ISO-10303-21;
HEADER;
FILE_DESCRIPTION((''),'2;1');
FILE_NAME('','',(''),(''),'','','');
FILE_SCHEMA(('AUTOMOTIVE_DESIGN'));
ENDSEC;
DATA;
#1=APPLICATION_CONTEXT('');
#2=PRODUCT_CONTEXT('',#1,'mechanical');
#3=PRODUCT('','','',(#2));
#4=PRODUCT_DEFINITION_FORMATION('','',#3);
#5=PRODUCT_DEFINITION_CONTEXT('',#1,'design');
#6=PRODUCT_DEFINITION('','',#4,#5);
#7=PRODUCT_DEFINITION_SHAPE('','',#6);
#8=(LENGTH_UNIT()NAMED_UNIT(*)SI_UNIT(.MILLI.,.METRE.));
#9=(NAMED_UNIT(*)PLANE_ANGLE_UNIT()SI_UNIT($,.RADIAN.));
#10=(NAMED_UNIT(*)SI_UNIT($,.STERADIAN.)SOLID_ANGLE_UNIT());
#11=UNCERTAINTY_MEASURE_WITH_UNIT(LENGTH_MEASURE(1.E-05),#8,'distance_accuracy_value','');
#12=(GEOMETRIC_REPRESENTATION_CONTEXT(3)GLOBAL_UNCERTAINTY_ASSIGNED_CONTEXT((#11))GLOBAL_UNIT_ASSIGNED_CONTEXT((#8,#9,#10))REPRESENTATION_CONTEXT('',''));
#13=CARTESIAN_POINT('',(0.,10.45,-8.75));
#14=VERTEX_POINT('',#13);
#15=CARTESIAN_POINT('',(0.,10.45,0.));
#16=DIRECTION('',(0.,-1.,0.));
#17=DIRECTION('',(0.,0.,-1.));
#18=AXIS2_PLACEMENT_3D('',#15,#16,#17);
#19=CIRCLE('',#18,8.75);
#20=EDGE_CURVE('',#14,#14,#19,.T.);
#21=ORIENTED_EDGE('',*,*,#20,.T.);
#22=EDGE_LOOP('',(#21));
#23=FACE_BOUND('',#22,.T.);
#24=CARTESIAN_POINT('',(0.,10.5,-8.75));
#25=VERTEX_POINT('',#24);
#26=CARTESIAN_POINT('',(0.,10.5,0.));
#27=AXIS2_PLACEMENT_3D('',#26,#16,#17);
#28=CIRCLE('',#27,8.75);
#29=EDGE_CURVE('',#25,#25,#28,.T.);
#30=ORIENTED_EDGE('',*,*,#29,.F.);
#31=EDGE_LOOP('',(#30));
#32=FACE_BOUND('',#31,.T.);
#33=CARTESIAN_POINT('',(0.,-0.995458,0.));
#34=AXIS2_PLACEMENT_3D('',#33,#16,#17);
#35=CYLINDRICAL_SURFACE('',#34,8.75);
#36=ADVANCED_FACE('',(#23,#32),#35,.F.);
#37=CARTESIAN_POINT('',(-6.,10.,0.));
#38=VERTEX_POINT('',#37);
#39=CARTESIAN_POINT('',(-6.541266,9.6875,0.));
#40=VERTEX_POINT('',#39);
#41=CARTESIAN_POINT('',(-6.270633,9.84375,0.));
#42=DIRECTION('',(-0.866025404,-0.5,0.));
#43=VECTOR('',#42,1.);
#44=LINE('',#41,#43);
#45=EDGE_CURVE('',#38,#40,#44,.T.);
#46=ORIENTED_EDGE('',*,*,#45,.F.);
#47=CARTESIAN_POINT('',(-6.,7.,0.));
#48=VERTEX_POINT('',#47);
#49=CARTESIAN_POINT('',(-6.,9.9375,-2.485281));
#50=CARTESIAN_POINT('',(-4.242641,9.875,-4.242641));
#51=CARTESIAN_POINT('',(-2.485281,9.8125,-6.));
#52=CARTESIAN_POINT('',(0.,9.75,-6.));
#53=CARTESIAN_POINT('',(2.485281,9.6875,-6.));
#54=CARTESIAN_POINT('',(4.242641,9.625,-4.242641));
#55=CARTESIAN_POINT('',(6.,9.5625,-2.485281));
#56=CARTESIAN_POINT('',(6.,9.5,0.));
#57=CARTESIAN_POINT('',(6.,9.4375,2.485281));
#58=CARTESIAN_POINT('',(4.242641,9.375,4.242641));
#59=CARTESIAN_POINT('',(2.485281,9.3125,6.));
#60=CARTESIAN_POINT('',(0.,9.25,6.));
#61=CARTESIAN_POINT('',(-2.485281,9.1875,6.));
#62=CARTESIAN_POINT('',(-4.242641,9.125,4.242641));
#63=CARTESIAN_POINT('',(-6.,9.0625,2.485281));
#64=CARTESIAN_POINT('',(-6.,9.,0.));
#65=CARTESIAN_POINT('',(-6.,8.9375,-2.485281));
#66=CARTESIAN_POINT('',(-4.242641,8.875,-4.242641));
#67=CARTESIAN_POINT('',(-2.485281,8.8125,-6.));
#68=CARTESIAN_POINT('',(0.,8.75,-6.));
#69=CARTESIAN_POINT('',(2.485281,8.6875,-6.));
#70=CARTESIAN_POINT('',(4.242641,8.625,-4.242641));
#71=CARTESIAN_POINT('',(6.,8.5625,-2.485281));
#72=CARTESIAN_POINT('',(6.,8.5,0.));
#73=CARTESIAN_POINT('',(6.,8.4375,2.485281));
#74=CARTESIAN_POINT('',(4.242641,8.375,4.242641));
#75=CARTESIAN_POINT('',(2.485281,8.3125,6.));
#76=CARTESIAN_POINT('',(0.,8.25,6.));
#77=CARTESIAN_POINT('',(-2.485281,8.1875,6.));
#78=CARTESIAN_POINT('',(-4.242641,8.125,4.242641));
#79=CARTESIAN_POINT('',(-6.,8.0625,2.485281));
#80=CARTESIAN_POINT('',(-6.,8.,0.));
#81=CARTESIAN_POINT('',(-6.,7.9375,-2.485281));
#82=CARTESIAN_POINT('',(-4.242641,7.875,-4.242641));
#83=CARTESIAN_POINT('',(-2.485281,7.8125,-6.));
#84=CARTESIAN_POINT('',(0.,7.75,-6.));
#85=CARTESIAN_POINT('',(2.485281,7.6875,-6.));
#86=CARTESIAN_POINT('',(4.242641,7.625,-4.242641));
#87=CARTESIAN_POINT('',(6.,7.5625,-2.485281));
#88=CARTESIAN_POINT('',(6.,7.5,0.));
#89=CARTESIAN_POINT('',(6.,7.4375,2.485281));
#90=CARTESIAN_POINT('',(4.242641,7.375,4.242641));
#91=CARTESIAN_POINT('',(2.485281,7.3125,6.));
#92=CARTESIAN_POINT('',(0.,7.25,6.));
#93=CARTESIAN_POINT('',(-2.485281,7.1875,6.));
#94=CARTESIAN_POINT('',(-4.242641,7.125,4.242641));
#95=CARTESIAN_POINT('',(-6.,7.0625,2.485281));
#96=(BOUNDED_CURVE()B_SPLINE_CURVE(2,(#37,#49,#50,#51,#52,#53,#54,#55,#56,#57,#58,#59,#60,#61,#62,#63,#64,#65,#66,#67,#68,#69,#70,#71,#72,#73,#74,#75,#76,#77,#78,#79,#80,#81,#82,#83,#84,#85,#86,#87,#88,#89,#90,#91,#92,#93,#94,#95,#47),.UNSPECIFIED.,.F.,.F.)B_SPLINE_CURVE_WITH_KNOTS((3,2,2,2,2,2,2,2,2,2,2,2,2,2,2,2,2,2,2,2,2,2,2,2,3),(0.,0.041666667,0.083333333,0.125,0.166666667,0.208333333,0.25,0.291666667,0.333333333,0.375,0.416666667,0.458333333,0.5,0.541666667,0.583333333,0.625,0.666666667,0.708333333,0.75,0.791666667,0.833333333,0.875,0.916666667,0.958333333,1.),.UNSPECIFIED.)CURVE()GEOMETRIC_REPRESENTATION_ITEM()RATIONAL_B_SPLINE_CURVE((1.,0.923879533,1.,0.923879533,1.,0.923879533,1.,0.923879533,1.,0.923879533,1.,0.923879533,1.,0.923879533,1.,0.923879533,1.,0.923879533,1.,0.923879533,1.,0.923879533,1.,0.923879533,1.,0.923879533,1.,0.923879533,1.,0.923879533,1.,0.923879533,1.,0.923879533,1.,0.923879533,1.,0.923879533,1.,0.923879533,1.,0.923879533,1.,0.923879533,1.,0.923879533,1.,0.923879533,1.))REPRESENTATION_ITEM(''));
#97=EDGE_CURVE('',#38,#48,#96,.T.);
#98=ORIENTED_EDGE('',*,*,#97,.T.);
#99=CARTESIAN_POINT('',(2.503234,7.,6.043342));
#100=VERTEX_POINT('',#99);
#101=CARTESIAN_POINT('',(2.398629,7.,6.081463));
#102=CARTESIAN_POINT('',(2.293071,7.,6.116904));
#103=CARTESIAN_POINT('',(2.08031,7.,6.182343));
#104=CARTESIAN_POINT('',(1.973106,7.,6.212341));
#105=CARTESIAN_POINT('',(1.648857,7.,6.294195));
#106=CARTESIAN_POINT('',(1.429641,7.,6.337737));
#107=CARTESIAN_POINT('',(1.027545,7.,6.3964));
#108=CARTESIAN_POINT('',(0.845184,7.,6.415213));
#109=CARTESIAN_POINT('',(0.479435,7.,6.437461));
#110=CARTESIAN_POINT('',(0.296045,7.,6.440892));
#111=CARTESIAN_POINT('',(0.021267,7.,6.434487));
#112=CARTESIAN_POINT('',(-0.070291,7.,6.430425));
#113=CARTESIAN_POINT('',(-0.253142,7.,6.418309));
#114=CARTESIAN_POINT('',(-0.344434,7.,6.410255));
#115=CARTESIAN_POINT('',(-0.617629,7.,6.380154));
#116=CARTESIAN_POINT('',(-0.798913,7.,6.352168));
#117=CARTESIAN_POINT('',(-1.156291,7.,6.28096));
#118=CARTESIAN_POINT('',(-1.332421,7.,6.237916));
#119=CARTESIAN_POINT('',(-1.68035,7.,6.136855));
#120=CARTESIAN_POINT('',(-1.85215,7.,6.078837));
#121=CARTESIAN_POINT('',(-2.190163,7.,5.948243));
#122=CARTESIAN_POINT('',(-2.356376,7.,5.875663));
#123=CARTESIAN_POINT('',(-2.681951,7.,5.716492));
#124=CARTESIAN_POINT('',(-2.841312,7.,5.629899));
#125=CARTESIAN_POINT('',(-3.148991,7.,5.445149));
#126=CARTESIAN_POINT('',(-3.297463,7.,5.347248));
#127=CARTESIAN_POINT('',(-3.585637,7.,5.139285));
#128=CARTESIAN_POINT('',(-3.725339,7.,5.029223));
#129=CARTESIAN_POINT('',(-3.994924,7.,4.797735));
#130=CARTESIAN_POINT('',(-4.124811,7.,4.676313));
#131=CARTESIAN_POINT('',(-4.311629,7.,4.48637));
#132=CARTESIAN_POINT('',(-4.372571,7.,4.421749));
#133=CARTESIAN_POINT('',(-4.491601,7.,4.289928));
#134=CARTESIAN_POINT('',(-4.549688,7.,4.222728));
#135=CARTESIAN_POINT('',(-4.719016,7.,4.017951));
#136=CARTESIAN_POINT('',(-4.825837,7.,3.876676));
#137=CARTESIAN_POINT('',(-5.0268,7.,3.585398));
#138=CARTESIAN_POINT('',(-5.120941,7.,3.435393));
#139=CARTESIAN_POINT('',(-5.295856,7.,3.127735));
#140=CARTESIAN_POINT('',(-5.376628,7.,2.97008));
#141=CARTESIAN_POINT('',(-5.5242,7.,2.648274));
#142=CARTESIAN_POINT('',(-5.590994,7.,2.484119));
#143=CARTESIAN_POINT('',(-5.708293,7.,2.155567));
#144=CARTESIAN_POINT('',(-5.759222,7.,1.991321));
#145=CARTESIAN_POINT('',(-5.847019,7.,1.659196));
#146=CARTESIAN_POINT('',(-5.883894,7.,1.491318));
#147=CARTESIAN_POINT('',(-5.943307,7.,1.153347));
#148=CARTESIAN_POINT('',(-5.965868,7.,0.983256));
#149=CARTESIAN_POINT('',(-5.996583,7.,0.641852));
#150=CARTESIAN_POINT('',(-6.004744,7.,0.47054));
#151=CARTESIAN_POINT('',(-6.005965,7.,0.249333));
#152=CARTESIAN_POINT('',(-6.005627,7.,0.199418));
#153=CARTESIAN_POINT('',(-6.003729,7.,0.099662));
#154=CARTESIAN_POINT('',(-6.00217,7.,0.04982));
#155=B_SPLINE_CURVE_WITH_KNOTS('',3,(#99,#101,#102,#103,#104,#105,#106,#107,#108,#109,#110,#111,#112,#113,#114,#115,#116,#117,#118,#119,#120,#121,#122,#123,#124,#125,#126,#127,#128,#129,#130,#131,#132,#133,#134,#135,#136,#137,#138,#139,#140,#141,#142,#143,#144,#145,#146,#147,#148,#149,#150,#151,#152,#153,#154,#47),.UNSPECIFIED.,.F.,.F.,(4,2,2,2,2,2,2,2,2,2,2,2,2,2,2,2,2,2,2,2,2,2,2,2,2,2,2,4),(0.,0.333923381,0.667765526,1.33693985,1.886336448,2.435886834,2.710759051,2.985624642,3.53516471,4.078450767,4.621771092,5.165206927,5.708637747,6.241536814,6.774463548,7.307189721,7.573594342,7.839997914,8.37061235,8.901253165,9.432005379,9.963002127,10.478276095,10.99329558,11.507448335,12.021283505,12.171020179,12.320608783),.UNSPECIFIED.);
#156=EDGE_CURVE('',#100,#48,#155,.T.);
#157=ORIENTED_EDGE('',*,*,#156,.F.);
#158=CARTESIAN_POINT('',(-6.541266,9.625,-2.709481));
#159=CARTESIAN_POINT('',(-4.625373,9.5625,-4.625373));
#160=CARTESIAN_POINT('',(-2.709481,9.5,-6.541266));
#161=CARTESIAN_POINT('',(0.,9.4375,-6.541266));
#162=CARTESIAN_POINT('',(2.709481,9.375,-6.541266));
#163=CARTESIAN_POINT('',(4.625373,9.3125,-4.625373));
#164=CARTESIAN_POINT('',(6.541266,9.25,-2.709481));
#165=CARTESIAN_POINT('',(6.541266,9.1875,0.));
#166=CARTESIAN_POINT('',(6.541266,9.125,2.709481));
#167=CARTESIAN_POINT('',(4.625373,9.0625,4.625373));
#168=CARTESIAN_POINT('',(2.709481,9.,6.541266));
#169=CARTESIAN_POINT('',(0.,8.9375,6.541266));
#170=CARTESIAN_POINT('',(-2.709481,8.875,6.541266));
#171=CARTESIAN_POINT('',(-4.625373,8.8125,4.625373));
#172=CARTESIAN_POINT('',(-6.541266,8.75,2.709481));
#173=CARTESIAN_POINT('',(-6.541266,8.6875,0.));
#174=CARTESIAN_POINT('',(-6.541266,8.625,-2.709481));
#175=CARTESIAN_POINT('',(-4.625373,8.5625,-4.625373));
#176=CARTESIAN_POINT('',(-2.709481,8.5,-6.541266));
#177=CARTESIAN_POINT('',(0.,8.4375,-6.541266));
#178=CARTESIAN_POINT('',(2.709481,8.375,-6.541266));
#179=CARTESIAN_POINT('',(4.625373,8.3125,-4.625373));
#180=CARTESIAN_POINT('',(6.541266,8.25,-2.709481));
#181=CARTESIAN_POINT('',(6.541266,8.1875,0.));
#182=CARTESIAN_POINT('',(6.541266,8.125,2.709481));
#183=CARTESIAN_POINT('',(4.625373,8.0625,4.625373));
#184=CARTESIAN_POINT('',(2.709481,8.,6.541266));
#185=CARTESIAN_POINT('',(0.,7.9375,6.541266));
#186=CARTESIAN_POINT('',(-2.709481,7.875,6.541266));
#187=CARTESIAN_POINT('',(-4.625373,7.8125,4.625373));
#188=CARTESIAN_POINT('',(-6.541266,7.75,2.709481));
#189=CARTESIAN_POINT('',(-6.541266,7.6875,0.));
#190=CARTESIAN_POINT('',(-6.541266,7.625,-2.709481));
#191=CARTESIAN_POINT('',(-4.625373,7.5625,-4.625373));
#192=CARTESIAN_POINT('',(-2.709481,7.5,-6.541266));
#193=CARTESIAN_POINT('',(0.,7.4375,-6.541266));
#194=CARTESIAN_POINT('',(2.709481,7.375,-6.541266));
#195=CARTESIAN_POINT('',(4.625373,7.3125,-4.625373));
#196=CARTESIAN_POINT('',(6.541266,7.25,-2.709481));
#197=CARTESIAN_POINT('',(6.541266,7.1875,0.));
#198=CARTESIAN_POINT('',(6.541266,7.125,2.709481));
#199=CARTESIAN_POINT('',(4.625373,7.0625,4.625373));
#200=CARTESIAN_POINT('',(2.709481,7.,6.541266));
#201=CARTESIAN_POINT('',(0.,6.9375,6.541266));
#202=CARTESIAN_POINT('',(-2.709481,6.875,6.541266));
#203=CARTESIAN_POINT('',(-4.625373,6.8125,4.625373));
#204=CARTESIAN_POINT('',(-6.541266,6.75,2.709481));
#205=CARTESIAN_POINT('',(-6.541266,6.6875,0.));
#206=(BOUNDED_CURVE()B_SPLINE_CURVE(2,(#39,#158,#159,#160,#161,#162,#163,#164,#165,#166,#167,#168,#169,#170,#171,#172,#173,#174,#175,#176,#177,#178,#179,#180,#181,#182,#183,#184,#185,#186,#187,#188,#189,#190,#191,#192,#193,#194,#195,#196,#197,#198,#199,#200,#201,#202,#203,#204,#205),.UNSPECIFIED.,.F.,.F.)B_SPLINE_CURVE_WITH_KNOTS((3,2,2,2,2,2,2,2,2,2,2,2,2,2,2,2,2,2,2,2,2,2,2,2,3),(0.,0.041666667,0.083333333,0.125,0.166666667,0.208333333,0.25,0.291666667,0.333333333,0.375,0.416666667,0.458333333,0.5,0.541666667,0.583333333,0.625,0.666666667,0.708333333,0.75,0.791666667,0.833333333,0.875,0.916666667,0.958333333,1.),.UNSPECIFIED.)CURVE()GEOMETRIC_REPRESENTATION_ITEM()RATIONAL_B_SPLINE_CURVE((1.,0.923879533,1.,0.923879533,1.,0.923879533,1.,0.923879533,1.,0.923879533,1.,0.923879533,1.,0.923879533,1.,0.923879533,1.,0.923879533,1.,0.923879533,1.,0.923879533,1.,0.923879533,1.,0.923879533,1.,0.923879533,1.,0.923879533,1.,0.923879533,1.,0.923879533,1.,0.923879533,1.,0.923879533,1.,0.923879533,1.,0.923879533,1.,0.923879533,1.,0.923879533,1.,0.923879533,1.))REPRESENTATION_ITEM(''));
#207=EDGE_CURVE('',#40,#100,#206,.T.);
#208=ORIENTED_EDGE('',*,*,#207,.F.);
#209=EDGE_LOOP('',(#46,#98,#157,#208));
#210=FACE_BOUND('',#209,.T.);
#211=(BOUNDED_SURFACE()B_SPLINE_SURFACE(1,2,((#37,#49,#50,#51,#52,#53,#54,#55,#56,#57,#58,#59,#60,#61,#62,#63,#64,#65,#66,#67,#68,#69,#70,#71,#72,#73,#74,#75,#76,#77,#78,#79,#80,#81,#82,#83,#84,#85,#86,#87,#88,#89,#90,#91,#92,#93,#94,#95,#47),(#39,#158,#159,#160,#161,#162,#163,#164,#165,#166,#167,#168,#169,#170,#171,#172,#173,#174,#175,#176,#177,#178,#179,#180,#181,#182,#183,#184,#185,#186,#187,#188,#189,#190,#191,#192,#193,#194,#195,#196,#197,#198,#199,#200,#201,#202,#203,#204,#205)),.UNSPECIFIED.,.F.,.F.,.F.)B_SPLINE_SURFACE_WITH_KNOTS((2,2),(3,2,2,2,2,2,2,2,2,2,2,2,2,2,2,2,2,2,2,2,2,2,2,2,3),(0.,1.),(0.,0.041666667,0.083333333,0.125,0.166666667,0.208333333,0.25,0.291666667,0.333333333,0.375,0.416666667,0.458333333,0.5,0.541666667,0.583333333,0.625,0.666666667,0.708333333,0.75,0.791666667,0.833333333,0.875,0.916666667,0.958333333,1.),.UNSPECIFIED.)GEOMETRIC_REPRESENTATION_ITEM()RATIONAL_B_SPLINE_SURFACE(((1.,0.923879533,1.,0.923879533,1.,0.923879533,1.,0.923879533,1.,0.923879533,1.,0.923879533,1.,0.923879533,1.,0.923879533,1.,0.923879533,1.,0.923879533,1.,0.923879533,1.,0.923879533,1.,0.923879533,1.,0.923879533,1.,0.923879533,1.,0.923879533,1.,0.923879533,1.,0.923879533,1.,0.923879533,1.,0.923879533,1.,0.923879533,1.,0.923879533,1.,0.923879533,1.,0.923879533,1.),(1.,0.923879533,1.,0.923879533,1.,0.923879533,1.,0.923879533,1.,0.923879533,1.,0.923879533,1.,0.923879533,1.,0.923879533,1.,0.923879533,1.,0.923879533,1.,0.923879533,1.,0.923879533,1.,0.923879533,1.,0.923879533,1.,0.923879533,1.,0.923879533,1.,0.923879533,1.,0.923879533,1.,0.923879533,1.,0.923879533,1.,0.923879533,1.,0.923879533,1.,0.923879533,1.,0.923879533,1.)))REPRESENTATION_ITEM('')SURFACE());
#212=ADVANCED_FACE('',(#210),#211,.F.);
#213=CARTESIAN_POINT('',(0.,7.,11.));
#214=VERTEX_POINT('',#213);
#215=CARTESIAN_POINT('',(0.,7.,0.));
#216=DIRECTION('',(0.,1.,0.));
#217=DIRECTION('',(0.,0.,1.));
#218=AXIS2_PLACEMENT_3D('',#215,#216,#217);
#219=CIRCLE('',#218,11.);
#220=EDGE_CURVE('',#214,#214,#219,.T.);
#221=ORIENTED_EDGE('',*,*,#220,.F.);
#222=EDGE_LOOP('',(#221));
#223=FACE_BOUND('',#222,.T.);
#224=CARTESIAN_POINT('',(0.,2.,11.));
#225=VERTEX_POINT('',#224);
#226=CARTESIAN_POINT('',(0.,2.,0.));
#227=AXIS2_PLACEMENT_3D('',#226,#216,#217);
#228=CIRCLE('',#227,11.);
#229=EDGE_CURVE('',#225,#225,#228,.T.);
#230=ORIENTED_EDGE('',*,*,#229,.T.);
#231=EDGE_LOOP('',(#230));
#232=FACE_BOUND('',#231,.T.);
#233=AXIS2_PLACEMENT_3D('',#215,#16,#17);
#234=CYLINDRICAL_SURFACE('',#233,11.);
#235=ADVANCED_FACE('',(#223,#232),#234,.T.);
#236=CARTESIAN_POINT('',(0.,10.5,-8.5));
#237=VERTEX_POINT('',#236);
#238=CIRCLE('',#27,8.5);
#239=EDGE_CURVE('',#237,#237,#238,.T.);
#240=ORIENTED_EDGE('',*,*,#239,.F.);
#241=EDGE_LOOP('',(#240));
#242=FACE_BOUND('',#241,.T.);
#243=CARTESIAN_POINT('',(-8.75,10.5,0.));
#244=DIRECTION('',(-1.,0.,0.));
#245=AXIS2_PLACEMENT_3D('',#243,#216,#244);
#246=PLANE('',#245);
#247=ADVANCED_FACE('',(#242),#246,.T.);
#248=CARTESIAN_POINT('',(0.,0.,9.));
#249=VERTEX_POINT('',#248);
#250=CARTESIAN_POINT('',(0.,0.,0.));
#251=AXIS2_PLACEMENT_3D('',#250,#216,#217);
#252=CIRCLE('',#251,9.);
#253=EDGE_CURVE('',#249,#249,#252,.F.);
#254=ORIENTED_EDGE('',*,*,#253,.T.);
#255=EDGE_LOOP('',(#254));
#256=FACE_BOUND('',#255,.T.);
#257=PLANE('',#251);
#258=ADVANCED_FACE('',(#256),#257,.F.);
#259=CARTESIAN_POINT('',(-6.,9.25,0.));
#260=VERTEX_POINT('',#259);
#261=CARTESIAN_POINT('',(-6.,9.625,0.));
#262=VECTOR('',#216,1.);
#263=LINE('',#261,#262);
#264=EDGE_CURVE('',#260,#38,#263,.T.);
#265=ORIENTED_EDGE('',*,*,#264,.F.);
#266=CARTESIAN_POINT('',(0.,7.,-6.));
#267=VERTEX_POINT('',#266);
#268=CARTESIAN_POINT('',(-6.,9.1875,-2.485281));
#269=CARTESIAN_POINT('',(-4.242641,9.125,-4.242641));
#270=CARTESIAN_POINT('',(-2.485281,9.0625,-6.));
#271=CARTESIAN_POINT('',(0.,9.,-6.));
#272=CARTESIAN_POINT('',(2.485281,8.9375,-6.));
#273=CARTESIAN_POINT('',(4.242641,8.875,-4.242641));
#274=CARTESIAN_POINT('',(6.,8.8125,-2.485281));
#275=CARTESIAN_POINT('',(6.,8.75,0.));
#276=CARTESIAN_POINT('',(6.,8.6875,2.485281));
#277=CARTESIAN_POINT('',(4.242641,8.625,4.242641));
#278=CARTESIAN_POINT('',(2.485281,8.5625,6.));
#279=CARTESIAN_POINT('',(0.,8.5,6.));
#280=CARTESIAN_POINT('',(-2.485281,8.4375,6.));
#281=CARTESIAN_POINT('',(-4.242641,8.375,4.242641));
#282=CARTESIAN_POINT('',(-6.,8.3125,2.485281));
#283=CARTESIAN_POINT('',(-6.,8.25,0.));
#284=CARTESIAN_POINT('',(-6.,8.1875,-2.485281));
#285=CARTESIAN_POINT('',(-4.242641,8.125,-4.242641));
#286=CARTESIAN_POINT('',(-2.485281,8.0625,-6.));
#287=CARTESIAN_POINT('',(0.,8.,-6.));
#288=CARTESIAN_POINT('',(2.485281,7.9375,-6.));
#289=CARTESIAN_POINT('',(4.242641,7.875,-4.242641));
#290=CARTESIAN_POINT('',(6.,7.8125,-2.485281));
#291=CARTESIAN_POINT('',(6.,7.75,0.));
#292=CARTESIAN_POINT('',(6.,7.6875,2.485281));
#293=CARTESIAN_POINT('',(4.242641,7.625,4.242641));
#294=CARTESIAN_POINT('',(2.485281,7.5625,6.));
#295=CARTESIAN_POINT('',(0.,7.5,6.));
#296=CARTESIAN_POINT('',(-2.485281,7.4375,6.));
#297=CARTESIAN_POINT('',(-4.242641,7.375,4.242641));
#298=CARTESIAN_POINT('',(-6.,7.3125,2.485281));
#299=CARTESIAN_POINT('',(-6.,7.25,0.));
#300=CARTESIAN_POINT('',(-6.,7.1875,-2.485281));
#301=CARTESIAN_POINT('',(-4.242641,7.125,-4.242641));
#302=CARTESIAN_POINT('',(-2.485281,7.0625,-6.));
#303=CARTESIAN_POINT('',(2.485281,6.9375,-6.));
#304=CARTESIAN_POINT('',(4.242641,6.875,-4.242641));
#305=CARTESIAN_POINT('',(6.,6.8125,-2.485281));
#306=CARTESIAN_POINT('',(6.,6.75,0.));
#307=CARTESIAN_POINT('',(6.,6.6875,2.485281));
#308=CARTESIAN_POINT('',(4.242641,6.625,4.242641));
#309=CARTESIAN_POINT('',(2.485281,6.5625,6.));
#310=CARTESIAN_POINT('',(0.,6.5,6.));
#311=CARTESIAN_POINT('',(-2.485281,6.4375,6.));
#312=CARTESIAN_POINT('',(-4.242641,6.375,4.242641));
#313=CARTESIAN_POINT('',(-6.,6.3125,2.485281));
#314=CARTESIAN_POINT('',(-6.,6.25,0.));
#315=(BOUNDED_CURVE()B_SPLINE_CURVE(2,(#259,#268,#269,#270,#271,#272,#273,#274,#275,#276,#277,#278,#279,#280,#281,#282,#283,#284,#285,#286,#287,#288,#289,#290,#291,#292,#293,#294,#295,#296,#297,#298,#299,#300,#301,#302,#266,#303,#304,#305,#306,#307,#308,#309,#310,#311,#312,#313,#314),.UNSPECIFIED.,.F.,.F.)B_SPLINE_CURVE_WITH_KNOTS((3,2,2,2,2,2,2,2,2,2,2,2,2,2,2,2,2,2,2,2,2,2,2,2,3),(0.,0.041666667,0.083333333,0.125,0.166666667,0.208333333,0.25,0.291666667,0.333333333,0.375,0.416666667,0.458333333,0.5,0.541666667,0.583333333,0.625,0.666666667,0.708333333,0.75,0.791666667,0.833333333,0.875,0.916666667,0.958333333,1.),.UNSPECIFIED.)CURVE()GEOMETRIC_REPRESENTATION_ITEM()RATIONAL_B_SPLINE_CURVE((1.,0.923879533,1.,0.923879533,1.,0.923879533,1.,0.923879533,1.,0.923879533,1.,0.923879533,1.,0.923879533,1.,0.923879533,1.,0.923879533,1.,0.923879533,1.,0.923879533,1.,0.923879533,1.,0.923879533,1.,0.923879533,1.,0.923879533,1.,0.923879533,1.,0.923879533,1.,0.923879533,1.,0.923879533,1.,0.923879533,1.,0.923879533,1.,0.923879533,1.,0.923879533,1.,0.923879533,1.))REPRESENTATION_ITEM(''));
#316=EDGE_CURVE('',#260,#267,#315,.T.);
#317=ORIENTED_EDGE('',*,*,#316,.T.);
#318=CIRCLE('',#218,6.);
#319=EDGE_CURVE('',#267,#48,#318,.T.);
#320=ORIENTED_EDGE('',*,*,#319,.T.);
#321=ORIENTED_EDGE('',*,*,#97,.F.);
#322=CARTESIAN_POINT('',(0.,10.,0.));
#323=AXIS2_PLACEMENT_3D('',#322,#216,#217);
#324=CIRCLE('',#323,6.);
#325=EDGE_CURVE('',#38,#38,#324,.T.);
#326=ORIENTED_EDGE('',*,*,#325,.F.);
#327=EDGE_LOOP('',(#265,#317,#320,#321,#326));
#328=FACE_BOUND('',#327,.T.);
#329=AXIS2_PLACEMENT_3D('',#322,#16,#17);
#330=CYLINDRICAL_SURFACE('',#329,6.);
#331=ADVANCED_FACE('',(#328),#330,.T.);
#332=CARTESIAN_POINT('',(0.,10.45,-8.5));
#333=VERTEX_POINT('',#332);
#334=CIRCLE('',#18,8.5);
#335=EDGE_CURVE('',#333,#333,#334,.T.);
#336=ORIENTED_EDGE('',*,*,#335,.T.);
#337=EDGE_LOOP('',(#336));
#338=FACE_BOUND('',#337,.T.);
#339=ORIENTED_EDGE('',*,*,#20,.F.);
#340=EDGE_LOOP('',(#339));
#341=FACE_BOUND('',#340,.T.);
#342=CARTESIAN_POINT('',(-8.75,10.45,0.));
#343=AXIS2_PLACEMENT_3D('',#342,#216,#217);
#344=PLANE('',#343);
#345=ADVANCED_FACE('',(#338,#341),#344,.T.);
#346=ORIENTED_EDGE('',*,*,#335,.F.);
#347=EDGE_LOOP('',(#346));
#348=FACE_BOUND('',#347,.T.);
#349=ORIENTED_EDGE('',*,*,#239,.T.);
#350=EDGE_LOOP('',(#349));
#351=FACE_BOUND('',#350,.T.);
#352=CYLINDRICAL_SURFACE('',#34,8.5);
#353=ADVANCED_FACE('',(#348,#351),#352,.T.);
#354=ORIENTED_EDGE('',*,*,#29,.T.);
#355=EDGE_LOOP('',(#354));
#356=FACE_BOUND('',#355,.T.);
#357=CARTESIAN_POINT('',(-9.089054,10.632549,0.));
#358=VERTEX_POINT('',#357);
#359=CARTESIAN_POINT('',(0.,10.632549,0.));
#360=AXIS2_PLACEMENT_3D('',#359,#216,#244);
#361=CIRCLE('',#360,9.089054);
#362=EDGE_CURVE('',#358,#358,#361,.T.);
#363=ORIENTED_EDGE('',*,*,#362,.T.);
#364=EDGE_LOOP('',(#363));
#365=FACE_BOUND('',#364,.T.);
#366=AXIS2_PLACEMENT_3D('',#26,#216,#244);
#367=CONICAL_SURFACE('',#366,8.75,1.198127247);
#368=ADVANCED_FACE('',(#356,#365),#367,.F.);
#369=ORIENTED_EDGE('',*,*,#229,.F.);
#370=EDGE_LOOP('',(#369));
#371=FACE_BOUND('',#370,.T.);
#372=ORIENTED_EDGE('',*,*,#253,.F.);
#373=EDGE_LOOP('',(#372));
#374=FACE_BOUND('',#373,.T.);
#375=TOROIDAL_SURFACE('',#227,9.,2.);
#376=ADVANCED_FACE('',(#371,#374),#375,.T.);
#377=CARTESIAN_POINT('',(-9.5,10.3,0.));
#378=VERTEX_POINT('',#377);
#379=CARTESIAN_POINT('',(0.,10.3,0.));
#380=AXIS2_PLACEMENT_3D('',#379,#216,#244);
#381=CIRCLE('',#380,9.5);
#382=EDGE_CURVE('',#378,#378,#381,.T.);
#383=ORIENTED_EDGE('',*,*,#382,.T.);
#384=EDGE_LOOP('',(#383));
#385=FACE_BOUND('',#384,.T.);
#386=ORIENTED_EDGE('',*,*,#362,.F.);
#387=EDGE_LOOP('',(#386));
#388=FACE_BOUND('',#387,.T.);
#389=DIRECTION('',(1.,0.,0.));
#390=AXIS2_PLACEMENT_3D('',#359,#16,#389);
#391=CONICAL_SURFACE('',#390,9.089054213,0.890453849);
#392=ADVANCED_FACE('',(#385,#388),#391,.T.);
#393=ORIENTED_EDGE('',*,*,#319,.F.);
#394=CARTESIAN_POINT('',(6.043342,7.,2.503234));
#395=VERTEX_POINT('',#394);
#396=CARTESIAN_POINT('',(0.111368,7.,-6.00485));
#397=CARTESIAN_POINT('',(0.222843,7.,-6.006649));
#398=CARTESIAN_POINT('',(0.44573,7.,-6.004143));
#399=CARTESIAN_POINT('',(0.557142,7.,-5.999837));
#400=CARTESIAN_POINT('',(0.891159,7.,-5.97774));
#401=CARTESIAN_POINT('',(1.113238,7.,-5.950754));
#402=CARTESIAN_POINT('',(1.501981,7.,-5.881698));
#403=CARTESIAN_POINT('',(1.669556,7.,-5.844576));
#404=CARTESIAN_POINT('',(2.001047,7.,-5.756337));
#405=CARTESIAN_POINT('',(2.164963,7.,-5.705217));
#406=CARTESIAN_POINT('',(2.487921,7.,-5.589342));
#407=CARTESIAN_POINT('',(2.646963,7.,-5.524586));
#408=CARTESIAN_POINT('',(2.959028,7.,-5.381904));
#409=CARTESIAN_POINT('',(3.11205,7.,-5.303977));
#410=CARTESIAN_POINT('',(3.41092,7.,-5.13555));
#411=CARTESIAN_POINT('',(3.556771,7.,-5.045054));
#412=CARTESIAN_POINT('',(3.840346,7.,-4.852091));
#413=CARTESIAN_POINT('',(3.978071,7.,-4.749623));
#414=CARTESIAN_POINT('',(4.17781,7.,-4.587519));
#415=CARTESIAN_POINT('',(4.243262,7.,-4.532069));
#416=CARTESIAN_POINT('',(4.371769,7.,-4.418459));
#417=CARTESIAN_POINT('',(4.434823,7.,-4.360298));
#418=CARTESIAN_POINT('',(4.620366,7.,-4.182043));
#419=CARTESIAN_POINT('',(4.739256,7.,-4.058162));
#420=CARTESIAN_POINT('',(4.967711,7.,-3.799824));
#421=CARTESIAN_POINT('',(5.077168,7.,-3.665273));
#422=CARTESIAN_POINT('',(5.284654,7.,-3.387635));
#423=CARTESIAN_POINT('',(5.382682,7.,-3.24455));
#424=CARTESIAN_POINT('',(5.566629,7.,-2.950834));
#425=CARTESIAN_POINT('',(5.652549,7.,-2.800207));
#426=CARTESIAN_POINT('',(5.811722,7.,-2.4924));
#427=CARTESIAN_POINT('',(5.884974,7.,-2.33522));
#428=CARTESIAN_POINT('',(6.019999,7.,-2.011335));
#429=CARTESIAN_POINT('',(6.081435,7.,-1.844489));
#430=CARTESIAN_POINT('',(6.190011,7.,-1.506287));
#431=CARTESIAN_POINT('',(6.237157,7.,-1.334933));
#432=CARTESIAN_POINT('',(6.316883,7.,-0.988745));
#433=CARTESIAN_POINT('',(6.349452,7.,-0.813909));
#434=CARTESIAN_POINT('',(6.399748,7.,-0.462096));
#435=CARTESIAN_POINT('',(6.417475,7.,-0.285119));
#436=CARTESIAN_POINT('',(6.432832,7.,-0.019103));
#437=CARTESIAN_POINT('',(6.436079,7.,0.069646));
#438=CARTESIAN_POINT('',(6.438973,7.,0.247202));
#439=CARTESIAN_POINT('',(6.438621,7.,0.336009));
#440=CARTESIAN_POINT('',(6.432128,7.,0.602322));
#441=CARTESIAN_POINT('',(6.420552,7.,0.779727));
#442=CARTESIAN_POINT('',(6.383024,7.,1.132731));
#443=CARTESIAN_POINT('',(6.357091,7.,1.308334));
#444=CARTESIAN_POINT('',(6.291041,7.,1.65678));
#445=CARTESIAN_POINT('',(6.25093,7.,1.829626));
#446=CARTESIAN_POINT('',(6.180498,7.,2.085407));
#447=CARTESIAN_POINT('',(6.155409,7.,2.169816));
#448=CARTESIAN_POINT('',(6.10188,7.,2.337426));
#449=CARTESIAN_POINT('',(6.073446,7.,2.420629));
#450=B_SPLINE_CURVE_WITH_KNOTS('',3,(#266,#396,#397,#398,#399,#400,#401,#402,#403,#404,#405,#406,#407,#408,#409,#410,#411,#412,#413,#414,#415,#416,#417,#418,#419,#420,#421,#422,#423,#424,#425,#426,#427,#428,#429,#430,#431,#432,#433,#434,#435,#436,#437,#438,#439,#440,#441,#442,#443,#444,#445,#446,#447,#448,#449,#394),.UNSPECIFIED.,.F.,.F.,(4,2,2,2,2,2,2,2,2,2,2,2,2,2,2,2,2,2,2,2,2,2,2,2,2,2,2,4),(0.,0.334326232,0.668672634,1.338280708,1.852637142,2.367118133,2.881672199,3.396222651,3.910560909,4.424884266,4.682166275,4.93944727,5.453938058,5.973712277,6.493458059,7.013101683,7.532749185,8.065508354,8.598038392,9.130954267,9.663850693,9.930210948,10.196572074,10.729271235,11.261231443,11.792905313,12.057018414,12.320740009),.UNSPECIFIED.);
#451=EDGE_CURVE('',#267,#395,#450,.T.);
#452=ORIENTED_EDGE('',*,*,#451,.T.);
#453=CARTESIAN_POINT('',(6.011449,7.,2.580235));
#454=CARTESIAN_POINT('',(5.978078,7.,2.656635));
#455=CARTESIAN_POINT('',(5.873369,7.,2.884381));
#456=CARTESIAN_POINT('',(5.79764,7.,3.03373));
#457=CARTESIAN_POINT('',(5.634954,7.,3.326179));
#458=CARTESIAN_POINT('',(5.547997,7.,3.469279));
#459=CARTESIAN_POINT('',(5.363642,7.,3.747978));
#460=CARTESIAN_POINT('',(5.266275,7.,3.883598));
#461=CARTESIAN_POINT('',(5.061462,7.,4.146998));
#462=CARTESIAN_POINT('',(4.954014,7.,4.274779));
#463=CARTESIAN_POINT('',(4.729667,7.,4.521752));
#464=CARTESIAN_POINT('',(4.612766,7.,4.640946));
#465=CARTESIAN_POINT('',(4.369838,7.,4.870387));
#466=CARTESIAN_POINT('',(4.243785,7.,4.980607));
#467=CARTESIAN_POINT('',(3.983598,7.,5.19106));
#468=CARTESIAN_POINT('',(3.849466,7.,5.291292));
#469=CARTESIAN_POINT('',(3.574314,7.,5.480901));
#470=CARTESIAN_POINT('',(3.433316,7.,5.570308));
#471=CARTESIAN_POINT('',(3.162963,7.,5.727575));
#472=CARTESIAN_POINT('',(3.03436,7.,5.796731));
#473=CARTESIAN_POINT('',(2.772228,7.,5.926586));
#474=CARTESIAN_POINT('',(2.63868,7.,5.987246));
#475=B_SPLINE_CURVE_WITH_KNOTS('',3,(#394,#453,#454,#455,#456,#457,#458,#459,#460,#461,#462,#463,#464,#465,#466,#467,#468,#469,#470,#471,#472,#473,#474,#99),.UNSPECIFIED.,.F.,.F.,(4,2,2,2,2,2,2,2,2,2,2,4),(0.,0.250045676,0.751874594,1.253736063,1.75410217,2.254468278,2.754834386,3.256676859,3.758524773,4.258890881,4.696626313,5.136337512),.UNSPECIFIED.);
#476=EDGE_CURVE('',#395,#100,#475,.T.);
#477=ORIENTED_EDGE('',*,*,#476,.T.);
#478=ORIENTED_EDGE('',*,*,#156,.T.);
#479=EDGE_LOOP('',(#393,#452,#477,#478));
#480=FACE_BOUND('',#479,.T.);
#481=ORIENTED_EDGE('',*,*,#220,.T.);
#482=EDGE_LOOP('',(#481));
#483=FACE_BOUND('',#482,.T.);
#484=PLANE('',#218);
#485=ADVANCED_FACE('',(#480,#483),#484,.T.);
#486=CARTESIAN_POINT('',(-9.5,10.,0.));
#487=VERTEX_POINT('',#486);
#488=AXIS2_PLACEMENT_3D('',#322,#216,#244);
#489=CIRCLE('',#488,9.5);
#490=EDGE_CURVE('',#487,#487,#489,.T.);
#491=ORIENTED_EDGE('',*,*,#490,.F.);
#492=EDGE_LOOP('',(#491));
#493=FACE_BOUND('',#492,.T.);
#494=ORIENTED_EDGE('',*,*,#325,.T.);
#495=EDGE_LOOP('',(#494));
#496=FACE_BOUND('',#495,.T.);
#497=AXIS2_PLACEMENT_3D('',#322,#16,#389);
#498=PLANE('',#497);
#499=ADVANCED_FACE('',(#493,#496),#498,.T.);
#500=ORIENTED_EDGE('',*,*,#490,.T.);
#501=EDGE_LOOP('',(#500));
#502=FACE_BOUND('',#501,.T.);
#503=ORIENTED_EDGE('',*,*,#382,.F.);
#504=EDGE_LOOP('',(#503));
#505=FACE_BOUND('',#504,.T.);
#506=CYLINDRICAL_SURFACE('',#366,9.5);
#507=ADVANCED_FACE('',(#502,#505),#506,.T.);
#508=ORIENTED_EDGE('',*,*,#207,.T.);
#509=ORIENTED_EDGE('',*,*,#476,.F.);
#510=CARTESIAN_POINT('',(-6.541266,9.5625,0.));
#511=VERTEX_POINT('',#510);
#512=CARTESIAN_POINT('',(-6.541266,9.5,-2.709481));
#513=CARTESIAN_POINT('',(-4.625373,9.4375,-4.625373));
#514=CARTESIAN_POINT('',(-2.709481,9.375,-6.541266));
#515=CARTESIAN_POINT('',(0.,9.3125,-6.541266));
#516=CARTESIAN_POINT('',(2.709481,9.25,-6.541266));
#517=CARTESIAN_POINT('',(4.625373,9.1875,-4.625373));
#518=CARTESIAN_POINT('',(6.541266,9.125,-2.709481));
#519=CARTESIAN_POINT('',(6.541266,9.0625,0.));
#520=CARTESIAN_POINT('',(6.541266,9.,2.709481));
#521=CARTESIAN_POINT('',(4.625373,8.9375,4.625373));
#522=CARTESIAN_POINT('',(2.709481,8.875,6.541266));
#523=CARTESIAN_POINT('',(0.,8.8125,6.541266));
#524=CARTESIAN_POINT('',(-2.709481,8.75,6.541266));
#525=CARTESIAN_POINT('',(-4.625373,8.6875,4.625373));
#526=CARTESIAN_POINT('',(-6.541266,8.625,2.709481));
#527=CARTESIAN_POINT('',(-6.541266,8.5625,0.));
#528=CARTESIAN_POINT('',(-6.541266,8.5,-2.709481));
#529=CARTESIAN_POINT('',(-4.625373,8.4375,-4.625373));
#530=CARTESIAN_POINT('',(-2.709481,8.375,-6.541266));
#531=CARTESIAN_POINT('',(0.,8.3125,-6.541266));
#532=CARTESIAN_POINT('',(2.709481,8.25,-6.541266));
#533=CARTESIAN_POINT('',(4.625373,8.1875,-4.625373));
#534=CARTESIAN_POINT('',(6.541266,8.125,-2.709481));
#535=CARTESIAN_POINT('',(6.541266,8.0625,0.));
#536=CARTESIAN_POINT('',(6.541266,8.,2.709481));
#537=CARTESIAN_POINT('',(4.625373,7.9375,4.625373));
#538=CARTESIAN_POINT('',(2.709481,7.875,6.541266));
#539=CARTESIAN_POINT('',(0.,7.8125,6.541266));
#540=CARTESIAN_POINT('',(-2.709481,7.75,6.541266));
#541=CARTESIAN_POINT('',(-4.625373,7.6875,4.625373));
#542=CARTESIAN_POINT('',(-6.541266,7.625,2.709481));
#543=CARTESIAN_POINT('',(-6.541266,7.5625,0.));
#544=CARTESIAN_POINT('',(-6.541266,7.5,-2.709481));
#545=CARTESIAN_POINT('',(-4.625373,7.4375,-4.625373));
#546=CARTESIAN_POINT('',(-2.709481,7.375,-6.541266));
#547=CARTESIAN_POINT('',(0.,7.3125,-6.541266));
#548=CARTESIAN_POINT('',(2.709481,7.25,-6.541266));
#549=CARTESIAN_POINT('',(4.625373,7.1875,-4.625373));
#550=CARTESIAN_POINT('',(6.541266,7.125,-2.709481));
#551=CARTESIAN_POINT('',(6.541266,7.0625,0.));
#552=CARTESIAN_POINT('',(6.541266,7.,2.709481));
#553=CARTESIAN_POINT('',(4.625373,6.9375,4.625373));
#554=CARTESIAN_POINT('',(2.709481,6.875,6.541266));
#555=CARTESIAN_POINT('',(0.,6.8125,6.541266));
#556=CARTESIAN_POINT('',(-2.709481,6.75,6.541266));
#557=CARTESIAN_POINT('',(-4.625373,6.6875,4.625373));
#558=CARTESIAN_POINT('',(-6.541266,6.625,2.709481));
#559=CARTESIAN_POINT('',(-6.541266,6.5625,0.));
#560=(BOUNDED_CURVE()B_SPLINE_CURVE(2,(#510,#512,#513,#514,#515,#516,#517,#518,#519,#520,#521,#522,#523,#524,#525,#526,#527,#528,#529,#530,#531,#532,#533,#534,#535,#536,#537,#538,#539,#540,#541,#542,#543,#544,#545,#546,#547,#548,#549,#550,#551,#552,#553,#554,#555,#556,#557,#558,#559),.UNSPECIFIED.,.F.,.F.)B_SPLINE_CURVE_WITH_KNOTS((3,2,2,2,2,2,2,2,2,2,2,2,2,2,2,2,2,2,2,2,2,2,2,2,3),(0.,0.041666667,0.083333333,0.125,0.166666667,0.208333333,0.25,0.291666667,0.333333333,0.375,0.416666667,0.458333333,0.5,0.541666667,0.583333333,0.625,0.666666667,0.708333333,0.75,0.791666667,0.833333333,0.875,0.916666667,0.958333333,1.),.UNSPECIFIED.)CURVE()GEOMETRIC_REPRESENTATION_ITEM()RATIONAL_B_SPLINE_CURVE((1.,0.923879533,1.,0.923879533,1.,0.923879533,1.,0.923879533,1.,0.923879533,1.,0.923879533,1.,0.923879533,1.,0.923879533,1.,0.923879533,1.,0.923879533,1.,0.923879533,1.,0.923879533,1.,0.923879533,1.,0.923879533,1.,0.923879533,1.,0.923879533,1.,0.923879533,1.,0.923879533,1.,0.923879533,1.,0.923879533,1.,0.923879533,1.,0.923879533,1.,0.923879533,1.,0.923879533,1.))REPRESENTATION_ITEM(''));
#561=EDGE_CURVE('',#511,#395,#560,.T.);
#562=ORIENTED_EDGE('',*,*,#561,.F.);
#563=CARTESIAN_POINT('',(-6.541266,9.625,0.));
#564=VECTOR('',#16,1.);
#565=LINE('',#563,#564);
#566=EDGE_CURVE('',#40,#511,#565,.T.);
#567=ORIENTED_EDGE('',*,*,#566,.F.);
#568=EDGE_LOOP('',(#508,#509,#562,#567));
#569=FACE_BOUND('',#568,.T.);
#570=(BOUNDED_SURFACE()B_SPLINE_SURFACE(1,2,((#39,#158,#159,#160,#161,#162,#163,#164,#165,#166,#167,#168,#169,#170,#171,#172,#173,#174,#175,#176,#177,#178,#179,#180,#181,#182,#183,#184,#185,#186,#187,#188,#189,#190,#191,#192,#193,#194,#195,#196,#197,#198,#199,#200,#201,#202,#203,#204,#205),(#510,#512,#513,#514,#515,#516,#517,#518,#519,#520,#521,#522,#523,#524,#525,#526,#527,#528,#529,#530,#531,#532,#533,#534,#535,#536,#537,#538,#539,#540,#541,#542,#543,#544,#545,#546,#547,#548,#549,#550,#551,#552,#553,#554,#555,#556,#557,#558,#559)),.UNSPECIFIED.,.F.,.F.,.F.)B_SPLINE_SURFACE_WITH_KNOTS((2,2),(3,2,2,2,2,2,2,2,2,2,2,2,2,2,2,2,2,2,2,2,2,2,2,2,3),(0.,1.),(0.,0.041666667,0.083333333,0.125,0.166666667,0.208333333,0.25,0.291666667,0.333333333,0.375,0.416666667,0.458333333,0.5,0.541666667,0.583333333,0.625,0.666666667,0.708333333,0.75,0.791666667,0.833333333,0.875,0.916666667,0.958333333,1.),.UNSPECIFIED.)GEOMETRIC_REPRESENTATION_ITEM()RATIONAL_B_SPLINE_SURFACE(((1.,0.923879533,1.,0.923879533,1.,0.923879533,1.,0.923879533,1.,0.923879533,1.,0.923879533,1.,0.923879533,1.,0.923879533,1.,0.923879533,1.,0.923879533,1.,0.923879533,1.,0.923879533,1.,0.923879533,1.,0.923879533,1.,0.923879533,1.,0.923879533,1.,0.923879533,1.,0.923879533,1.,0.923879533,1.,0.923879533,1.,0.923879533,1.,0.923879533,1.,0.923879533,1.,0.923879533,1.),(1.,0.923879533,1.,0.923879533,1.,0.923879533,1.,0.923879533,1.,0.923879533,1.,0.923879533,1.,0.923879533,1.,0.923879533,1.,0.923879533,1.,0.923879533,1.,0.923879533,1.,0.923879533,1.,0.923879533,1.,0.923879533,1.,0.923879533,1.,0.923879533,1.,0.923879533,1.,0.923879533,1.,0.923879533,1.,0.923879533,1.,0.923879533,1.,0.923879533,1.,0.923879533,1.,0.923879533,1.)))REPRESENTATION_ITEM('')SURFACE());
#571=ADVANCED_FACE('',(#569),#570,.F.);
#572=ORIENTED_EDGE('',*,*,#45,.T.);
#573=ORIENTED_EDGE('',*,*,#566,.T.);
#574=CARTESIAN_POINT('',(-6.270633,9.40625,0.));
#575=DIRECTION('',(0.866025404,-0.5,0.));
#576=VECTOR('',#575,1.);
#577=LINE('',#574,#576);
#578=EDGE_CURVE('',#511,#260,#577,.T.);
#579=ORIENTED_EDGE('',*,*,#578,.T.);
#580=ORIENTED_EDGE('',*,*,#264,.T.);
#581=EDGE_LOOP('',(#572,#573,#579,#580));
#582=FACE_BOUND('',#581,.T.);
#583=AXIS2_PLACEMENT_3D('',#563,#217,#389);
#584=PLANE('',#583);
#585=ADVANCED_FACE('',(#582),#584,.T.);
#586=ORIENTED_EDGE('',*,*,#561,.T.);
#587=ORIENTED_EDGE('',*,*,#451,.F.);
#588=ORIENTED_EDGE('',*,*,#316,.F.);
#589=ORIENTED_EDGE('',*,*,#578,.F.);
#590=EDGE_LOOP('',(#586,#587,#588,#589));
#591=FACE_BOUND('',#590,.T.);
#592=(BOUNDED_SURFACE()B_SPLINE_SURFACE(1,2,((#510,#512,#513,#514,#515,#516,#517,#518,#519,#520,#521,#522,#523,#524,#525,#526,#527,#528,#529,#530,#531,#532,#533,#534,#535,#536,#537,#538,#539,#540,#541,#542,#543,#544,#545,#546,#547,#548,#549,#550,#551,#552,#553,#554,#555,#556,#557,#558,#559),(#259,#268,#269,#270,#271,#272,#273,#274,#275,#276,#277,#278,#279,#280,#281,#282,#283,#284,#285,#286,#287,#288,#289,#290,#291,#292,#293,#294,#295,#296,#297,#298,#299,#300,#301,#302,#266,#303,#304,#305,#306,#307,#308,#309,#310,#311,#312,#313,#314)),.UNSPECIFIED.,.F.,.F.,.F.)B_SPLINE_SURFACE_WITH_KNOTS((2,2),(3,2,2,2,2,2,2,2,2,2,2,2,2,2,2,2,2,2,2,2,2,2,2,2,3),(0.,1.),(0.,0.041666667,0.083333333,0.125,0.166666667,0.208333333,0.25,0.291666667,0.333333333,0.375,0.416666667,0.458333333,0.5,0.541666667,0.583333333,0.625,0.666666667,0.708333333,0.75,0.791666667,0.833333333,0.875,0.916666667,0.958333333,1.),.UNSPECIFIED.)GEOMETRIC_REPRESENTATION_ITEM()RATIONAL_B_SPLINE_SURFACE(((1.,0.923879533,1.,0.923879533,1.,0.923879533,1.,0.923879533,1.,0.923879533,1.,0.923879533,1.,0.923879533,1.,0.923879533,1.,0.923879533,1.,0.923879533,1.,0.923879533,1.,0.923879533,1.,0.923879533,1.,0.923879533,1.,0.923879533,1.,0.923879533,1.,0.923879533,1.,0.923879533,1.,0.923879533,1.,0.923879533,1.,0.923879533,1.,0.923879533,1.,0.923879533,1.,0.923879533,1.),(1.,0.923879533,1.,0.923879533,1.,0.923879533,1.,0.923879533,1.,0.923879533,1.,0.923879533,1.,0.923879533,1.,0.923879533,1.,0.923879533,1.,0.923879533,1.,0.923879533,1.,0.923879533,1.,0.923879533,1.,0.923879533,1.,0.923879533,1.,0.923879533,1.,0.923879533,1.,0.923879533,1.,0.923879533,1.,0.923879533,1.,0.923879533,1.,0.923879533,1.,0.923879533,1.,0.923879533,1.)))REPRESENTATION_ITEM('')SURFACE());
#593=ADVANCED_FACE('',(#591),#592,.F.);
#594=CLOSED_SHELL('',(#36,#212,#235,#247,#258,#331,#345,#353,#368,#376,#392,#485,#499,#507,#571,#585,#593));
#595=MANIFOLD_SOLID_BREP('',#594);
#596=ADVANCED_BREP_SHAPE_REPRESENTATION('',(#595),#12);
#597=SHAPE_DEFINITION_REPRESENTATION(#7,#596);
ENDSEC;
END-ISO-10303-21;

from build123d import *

# Parameters (mm, degrees)
SKETCH_1_R      = 11
EXTRUDE_1_DEPTH = 7
SKETCH_2_R      = 6
EXTRUDE_2_DEPTH = 3
FILLET_1_R      = 2
THREAD_1_PITCH  = 1
SKETCH_9_W      = 0.25
SKETCH_9_H      = 0.05


with BuildPart() as part:
    # Sketch 1 → 凸台-拉伸1 (new body)
    with BuildSketch(Plane(origin=(0, 0, 0), x_dir=(1, 0, 0), z_dir=(0, 1, 0))):
        with Locations(Location((0, 0, 0), (0, 0, 270))):
            Circle(SKETCH_1_R)
    extrude(amount=EXTRUDE_1_DEPTH)

    # 草图2 → 凸台-拉伸2 (add)
    with BuildSketch(Plane(origin=(0, 7, 0), x_dir=(1, 0, 0), z_dir=(0, 1, 0))):
        with Locations(Location((0, 0, 0), (0, 0, 270))):
            Circle(SKETCH_2_R)
    extrude(amount=EXTRUDE_2_DEPTH)

    # 圆角1
    fillet_1_edges = [part.edges().sort_by_distance(p)[0] for p in [
        (0, 0, -11),
    ]]
    fillet(fillet_1_edges, radius=FILLET_1_R)

    # 螺纹线1: the profile of Sketch 1 2 profile screwed along a right-hand helix of 3 turns, 8 arcs to a turn; built about Z, then put on its axis
    thread_1_z = Axis((0, 0, 0), (0, 0, 1))
    thread_1_corners = [(5.9997, 0, -0.000173205), (6.541265875, 0, 0.312499999), (6.541265875, 0, 0.437499999), (5.9997, 0, 0.750173202)]
    with BuildLine(mode=Mode.PRIVATE) as thread_1_profile:
        Line(thread_1_corners[0], thread_1_corners[1])
        Line(thread_1_corners[1], thread_1_corners[2])
        Line(thread_1_corners[2], thread_1_corners[3])
        Line(thread_1_corners[3], thread_1_corners[0])
    thread_1_cap = Face(thread_1_profile.wire())
    thread_1_turn_angles = [0, 22.5, 45, 67.5, 90, 112.5, 135, 157.5, 180, 202.5, 225, 247.5, 270, 292.5, 315, 337.5, 360]
    thread_1_turn_weights = [1, 0.9238795325112867, 1, 0.9238795325112867, 1, 0.9238795325112867, 1, 0.9238795325112867, 1, 0.9238795325112867, 1, 0.9238795325112867, 1, 0.9238795325112867, 1, 0.9238795325112867, 1]
    thread_1_turn_rails = [Edge.make_bspline([Vector(p[0], p[1], 0).rotate(thread_1_z, thread_1_turn_angles[k]) / thread_1_turn_weights[k] + Vector(0, 0, p[2] + THREAD_1_PITCH * thread_1_turn_angles[k] / 360) for k in range(17)], [0, 0, 0, 1, 1, 2, 2, 3, 3, 4, 4, 5, 5, 6, 6, 7, 7, 8, 8, 8], 2, thread_1_turn_weights) for p in thread_1_corners]
    thread_1_turn_sides = [Face.make_surface_from_curves(thread_1_turn_rails[p[0]], thread_1_turn_rails[p[1]]) for p in [(0, 1), (1, 2), (2, 3), (3, 0)]]
    thread_1 = Plane(origin=(0, 10, 0), x_dir=(-1, 0, 0), z_dir=(0, -1, 0)) * Solid(Shell([*[p.moved(Location((0, 0, THREAD_1_PITCH * i))) for i in range(3) for p in thread_1_turn_sides], thread_1_cap, thread_1_cap.rotate(thread_1_z, 1080).moved(Location((0, 0, THREAD_1_PITCH * 1080 / 360)))]))
    add(thread_1)

    # 草图7 → 旋转1 (revolve)
    with BuildSketch(Plane.XY):
        Polygon((0, 10), (-9.5, 10), (-9.5, 10.3), (-9.089054213, 10.632548824), (-8.75, 10.5), (0, 10.5), align=None)
    revolve(axis=Axis((0, 10.5, 0), (0, -1, 0)))

    # 草图9 → 切除-旋转1 (revolve, cut)
    with BuildSketch(Plane.XY, mode=Mode.PRIVATE) as cut_revolve_1_sk:
        with Locations((-8.625, 10.475)):
            Rectangle(SKETCH_9_W, SKETCH_9_H)
    revolve(cut_revolve_1_sk.sketch.rotate(Axis((0, -0.995458227, 0), (0, 1, 0)), 270), axis=Axis((0, -0.995458227, 0), (0, 1, 0)), mode=Mode.SUBTRACT)


solid = part.part
